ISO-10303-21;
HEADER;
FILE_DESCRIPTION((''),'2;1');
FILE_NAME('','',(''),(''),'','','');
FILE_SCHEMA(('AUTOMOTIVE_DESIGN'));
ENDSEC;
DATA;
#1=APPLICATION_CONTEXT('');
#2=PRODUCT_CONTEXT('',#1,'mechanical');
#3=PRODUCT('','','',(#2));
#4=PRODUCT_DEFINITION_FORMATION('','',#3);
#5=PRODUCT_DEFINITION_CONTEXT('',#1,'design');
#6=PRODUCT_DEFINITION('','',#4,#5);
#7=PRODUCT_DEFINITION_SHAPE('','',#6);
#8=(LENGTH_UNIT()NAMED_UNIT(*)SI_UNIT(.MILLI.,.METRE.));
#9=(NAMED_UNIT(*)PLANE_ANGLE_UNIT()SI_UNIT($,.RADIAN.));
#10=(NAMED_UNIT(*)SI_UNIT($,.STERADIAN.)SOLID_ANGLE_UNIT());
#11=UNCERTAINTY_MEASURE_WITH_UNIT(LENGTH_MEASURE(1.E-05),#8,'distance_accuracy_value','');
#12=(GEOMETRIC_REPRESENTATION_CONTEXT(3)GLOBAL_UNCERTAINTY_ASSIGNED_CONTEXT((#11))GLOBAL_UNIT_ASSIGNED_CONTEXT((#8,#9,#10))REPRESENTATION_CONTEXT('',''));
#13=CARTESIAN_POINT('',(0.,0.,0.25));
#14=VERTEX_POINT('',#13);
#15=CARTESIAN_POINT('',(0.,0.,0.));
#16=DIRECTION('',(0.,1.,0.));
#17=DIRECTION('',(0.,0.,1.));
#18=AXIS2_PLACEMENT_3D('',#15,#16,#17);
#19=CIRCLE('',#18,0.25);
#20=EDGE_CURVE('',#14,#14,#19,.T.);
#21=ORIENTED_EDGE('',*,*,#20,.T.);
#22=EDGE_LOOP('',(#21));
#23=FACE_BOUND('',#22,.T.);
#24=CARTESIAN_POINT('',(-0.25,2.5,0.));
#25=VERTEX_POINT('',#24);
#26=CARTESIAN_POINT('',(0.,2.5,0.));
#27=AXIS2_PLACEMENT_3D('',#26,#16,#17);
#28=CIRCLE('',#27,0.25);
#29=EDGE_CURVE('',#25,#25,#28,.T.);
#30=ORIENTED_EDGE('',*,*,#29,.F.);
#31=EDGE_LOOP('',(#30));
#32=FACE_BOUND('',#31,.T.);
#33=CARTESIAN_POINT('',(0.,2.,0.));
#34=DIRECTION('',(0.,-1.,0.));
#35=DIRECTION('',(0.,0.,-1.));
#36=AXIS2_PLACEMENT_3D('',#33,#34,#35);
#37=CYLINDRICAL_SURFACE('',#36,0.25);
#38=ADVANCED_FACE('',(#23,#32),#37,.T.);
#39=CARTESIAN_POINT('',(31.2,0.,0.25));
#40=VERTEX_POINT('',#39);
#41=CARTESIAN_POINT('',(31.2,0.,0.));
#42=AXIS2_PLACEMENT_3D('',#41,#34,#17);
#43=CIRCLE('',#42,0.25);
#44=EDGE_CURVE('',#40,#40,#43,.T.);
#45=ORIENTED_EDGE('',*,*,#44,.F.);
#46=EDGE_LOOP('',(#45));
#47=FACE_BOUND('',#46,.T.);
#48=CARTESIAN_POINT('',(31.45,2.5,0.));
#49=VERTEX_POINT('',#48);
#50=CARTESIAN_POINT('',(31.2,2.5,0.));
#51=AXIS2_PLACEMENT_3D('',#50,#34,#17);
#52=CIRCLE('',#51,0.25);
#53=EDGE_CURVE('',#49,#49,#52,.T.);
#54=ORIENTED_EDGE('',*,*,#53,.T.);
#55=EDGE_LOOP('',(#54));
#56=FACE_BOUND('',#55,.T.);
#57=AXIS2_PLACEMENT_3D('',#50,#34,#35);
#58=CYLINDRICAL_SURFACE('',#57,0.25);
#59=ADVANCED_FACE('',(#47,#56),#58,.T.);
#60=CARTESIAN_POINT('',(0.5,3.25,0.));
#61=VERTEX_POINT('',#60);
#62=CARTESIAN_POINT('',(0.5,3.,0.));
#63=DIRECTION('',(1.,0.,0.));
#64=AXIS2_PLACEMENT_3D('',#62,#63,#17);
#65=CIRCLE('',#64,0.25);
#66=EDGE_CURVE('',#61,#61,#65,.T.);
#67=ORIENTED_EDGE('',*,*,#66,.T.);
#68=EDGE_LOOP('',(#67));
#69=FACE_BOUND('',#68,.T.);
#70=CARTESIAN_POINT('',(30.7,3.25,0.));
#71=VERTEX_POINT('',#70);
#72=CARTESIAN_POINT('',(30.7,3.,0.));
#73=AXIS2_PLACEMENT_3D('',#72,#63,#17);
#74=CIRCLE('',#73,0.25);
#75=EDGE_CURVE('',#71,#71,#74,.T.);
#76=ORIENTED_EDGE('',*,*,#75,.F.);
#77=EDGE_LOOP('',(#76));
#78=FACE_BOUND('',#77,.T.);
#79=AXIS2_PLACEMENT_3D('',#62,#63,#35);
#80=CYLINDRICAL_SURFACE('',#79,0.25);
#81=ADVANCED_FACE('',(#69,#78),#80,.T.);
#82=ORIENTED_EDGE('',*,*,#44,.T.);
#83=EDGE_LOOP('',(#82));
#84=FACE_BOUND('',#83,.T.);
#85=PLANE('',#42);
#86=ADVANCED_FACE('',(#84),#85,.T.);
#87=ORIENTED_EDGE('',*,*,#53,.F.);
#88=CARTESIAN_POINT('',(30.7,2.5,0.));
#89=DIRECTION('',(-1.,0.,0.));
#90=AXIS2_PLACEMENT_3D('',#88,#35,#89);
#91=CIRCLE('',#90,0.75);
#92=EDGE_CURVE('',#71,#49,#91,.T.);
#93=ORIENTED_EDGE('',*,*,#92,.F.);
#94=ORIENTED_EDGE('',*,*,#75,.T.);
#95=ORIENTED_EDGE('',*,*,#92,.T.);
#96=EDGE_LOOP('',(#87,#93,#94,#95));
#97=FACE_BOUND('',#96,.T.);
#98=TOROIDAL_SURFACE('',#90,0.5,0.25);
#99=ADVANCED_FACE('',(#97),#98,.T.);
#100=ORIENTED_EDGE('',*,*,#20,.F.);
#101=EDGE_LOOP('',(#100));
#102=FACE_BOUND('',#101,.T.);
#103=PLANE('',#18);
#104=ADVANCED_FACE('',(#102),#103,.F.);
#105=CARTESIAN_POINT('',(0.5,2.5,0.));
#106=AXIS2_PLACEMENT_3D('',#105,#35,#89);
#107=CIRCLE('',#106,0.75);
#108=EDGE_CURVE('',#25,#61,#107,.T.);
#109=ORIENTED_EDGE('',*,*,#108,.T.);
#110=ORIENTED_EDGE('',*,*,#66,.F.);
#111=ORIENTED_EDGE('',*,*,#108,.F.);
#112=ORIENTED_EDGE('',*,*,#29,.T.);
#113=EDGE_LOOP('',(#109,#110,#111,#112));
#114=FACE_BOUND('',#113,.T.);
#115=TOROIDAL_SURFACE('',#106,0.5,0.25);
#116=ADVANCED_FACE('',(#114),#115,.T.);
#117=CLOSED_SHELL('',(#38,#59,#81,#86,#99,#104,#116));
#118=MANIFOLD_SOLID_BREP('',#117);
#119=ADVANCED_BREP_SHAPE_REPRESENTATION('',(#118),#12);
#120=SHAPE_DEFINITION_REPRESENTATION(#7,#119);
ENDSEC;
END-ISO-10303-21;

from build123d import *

# Parameters (mm, degrees)
SKETCH1_R           = 0.25
BOSS_EXTRUDE1_DEPTH = 2
SWEEP1_OUTLINE_R    = 0.25
SWEEP1_DEPTH        = 2.5
SWEEP1_2_OUTLINE_R  = 0.25
SWEEP1_2_ANGLE      = 90
SWEEP1_3_OUTLINE_R  = 0.25
SWEEP1_3_ANGLE      = 90
SWEEP1_START        = 0.4999999
SWEEP1_4_OUTLINE_R  = 0.25
SWEEP1_4_DEPTH      = 30.2000002


with BuildPart() as part:
    # Sketch1 → Boss-Extrude1 (new body)
    with BuildSketch(Plane(origin=(0, 0, 0), x_dir=(1, 0, 0), z_dir=(0, 1, 0))):
        with Locations(Location((0, 0, 0), (0, 0, 270))):
            Circle(SKETCH1_R)
    extrude(amount=BOSS_EXTRUDE1_DEPTH)

    # Sweep1: read off the stored shape, not the designer's step
    # Sweep1 outline → Sweep1 (add)
    with BuildSketch(Plane(origin=(0, 0, 0), x_dir=(1, 0, 0), z_dir=(0, 1, 0))):
        Circle(SWEEP1_OUTLINE_R)
        with Locations((31.2, 0)):
            Circle(SWEEP1_OUTLINE_R)
    extrude(amount=SWEEP1_DEPTH)

    # Sweep1 2 outline → Sweep1 2 (revolve)
    with BuildSketch(Plane(origin=(0.5, 2.5, 0), x_dir=(0, 1, 0), z_dir=(1, 0, 0))):
        with Locations((0.5, 0)):
            Circle(SWEEP1_2_OUTLINE_R)
    revolve(axis=Axis((0.5, 2.5, 0), (0, 0, 1)), revolution_arc=SWEEP1_2_ANGLE)

    # Sweep1 3 outline → Sweep1 3 (revolve)
    with BuildSketch(Plane(origin=(30.7, 2.5, 0), x_dir=(1, 0, 0), z_dir=(0, -1, 0))):
        with Locations((0.5, 0)):
            Circle(SWEEP1_3_OUTLINE_R)
    revolve(axis=Axis((30.7, 2.5, 0), (0, 0, 1)), revolution_arc=SWEEP1_3_ANGLE)

    # Sweep1 4 outline → Sweep1 4 (add)
    with BuildSketch(Plane.YZ.offset(SWEEP1_START)):
        with Locations((3, 0)):
            Circle(SWEEP1_4_OUTLINE_R)
    extrude(amount=SWEEP1_4_DEPTH)


solid = part.part
